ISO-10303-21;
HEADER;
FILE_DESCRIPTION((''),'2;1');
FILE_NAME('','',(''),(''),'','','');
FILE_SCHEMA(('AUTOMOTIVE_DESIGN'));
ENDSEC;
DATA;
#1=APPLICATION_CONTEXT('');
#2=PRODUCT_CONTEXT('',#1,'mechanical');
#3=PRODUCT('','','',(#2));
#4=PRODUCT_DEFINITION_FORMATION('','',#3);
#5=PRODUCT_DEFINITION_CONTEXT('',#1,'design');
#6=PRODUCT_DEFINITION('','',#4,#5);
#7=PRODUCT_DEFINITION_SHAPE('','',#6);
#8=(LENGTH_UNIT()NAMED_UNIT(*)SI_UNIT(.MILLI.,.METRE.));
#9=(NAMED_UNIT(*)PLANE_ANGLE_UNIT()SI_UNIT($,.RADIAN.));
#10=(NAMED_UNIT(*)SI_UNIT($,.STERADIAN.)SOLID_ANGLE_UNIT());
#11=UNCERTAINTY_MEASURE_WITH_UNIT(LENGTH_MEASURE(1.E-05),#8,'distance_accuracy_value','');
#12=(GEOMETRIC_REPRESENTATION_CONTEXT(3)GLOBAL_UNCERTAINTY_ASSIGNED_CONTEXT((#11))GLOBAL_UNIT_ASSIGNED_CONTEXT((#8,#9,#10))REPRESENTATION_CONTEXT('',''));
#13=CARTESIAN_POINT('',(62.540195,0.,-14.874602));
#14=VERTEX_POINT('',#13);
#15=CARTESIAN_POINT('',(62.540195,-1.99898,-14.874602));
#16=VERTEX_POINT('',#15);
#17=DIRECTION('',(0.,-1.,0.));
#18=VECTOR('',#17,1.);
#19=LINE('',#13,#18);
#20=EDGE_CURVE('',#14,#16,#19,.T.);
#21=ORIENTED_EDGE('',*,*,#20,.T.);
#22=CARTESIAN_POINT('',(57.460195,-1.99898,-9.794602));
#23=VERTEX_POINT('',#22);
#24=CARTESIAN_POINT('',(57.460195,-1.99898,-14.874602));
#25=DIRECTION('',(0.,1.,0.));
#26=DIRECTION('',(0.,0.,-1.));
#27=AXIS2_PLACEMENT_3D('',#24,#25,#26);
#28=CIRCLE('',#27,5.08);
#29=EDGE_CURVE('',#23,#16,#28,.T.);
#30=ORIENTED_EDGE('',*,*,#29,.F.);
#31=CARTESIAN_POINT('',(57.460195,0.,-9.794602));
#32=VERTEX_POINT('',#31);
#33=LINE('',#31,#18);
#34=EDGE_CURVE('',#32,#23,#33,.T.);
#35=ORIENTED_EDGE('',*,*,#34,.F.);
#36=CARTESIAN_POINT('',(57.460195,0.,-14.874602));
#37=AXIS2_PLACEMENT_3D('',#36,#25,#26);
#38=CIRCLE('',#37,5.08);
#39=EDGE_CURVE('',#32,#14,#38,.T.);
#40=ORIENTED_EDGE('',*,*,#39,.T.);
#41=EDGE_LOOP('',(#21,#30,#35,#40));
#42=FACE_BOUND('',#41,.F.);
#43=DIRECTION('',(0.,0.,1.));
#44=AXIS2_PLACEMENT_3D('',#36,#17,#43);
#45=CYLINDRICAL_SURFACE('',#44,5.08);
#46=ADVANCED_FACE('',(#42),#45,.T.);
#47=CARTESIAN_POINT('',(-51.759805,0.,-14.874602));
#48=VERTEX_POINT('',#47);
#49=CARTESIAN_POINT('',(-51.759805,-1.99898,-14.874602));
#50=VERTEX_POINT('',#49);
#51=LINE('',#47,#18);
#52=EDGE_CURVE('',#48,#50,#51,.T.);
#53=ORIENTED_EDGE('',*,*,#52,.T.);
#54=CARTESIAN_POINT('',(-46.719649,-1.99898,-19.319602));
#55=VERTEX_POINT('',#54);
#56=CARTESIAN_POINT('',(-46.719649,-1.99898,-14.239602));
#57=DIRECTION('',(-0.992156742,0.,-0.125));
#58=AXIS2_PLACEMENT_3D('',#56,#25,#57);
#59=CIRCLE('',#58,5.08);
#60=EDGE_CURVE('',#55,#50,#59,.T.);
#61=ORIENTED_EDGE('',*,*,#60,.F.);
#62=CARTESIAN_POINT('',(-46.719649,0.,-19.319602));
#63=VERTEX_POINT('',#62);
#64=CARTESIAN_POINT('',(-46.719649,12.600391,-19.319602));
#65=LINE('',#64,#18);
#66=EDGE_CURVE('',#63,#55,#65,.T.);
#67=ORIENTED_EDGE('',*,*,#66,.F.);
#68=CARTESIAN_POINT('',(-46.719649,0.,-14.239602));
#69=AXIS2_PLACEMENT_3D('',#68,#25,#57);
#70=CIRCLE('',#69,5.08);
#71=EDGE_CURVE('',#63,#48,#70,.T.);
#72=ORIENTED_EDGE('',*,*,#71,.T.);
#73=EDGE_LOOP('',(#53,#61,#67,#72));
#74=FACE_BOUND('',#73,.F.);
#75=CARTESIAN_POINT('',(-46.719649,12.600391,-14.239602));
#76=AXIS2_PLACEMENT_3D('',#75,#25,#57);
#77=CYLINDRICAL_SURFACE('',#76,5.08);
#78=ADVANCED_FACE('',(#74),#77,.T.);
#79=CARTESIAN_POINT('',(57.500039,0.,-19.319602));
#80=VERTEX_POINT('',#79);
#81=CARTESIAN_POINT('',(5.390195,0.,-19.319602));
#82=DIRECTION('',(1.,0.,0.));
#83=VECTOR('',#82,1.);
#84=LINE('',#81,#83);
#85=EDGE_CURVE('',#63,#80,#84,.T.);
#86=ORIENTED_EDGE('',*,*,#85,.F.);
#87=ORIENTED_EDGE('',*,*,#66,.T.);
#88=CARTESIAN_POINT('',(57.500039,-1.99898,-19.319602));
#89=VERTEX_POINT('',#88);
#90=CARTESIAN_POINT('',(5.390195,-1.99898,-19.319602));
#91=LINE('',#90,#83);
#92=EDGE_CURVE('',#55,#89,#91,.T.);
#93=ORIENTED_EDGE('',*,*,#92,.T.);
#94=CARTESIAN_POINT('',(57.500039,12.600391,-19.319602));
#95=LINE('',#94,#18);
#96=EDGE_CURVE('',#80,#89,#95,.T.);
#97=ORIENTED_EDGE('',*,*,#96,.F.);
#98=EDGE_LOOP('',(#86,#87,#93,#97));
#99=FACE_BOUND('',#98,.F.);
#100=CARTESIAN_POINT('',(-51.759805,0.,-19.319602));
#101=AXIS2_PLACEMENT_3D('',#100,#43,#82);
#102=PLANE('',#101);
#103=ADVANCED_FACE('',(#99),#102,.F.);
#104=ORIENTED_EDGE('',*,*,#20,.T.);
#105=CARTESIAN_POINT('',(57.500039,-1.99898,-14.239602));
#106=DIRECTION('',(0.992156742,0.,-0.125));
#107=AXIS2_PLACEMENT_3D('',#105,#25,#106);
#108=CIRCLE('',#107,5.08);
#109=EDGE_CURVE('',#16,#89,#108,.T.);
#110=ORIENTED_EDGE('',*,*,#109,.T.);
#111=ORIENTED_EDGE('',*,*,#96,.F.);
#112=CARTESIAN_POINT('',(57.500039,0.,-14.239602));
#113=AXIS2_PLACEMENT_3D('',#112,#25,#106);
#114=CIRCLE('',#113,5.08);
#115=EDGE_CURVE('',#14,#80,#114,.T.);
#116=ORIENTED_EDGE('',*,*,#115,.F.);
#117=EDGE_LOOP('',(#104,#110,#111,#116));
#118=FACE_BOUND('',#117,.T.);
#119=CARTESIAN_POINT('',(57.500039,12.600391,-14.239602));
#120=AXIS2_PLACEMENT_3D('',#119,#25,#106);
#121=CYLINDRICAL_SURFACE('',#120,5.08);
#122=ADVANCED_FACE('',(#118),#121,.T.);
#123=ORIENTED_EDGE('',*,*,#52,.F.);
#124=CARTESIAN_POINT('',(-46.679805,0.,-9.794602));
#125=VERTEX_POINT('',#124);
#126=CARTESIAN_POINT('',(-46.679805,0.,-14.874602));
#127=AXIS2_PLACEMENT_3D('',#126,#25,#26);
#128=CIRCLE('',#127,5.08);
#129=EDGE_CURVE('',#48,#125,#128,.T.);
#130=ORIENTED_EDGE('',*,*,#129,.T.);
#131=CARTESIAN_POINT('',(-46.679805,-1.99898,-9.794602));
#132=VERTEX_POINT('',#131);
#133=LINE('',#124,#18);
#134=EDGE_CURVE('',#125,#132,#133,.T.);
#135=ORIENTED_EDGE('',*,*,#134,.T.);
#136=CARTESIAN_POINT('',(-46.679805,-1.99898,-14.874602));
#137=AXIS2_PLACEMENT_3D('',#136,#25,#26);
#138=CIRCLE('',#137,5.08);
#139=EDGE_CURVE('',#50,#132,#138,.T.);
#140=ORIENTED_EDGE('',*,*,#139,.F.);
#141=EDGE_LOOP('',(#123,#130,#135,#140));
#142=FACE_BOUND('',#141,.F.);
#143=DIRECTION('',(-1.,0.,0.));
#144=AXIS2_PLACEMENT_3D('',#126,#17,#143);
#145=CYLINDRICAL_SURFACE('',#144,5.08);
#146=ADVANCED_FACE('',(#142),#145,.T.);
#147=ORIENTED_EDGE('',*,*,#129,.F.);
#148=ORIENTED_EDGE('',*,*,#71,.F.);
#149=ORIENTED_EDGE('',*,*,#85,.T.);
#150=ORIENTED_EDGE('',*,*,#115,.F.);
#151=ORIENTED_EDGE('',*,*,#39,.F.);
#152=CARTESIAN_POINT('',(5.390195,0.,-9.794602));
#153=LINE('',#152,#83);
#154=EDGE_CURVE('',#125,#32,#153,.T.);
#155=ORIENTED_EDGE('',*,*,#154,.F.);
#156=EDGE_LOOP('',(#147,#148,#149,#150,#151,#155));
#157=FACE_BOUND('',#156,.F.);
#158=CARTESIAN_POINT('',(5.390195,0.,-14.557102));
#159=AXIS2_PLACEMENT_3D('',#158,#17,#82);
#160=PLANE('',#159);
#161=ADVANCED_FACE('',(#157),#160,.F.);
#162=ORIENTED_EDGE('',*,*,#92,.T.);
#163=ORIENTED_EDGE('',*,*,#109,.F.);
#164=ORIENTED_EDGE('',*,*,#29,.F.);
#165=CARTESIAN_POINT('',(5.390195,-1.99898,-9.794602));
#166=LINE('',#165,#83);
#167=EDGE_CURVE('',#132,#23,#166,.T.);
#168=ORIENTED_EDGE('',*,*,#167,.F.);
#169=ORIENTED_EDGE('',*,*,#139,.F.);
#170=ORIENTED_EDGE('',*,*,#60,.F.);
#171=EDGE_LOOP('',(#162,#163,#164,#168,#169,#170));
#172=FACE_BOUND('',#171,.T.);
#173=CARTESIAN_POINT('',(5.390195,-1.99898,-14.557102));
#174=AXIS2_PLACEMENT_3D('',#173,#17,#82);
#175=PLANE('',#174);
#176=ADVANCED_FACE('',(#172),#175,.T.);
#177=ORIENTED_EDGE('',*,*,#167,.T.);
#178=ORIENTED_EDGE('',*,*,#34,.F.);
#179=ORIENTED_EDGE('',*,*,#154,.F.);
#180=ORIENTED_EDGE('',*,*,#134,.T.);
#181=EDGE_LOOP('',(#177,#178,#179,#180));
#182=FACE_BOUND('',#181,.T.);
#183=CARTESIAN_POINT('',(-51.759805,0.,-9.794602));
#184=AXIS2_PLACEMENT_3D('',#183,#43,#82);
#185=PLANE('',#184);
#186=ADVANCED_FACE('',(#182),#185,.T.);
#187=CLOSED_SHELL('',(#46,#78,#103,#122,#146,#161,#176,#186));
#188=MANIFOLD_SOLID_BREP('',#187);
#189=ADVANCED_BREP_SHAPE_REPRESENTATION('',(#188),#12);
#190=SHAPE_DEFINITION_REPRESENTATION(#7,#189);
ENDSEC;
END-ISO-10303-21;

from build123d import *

# Parameters (mm, degrees)
F0_W        = 114.3
F0_H        = 9.525
F1_DEPTH    = 1.99898
F2_R        = 5.08
F3_T1_DEPTH = 27.1997612379
F4_R        = 5.08
F5_T1_DEPTH = 27.1997612379


# Not quite as in the source:
# - a fillet or chamfer that OpenCascade refuses, or shapes differently, is made with other operations: its cross-section is extruded or revolved along the edge and cut away or added


with BuildPart() as f1:
    # F0 (on Front) → F1 (new body)
    with BuildSketch(Plane.XZ):
        with Locations((5.390194959, -14.5571018083)):
            Rectangle(F0_W, F0_H)
    extrude(amount=F1_DEPTH)

    # F2
    f2_edges = [f1.edges().sort_by_distance(p)[0] for p in [
        (-51.759805, -0.99949, -9.794602),
    ]]
    fillet(f2_edges, radius=F2_R)

    # F3: fillet of radius 5.08 on 1 edges, made by hand

    # F3_s2 → F3_t1 (cut)
    with BuildSketch(Plane.XZ.offset(-12.6003906189)):
        with BuildLine():
            ThreePointArc((-51.759805041, -14.8746018083), (-50.0797529584, -18.0496018083), (-46.7196487934, -19.3196018083))
            Line((-46.7196487934, -19.3196018083), (-51.759805041, -19.3196018083))
            Line((-51.759805041, -19.3196018083), (-51.759805041, -14.8746018083))
        make_face()
    extrude(amount=F3_T1_DEPTH, mode=Mode.SUBTRACT)

    # F4
    f4_edges = [f1.edges().sort_by_distance(p)[0] for p in [
        (62.540195, -0.99949, -9.794602),
    ]]
    fillet(f4_edges, radius=F4_R)

    # F5: fillet of radius 5.08 on 1 edges, made by hand

    # F5_s2 → F5_t1 (cut)
    with BuildSketch(Plane.XZ.offset(-12.6003906189)):
        with BuildLine():
            ThreePointArc((62.540194959, -14.8746018083), (60.8601428765, -18.0496018083), (57.5000387115, -19.3196018083))
            Line((57.5000387115, -19.3196018083), (62.540194959, -19.3196018083))
            Line((62.540194959, -19.3196018083), (62.540194959, -14.8746018083))
        make_face()
    extrude(amount=F5_T1_DEPTH, mode=Mode.SUBTRACT)


solid = f1.part
